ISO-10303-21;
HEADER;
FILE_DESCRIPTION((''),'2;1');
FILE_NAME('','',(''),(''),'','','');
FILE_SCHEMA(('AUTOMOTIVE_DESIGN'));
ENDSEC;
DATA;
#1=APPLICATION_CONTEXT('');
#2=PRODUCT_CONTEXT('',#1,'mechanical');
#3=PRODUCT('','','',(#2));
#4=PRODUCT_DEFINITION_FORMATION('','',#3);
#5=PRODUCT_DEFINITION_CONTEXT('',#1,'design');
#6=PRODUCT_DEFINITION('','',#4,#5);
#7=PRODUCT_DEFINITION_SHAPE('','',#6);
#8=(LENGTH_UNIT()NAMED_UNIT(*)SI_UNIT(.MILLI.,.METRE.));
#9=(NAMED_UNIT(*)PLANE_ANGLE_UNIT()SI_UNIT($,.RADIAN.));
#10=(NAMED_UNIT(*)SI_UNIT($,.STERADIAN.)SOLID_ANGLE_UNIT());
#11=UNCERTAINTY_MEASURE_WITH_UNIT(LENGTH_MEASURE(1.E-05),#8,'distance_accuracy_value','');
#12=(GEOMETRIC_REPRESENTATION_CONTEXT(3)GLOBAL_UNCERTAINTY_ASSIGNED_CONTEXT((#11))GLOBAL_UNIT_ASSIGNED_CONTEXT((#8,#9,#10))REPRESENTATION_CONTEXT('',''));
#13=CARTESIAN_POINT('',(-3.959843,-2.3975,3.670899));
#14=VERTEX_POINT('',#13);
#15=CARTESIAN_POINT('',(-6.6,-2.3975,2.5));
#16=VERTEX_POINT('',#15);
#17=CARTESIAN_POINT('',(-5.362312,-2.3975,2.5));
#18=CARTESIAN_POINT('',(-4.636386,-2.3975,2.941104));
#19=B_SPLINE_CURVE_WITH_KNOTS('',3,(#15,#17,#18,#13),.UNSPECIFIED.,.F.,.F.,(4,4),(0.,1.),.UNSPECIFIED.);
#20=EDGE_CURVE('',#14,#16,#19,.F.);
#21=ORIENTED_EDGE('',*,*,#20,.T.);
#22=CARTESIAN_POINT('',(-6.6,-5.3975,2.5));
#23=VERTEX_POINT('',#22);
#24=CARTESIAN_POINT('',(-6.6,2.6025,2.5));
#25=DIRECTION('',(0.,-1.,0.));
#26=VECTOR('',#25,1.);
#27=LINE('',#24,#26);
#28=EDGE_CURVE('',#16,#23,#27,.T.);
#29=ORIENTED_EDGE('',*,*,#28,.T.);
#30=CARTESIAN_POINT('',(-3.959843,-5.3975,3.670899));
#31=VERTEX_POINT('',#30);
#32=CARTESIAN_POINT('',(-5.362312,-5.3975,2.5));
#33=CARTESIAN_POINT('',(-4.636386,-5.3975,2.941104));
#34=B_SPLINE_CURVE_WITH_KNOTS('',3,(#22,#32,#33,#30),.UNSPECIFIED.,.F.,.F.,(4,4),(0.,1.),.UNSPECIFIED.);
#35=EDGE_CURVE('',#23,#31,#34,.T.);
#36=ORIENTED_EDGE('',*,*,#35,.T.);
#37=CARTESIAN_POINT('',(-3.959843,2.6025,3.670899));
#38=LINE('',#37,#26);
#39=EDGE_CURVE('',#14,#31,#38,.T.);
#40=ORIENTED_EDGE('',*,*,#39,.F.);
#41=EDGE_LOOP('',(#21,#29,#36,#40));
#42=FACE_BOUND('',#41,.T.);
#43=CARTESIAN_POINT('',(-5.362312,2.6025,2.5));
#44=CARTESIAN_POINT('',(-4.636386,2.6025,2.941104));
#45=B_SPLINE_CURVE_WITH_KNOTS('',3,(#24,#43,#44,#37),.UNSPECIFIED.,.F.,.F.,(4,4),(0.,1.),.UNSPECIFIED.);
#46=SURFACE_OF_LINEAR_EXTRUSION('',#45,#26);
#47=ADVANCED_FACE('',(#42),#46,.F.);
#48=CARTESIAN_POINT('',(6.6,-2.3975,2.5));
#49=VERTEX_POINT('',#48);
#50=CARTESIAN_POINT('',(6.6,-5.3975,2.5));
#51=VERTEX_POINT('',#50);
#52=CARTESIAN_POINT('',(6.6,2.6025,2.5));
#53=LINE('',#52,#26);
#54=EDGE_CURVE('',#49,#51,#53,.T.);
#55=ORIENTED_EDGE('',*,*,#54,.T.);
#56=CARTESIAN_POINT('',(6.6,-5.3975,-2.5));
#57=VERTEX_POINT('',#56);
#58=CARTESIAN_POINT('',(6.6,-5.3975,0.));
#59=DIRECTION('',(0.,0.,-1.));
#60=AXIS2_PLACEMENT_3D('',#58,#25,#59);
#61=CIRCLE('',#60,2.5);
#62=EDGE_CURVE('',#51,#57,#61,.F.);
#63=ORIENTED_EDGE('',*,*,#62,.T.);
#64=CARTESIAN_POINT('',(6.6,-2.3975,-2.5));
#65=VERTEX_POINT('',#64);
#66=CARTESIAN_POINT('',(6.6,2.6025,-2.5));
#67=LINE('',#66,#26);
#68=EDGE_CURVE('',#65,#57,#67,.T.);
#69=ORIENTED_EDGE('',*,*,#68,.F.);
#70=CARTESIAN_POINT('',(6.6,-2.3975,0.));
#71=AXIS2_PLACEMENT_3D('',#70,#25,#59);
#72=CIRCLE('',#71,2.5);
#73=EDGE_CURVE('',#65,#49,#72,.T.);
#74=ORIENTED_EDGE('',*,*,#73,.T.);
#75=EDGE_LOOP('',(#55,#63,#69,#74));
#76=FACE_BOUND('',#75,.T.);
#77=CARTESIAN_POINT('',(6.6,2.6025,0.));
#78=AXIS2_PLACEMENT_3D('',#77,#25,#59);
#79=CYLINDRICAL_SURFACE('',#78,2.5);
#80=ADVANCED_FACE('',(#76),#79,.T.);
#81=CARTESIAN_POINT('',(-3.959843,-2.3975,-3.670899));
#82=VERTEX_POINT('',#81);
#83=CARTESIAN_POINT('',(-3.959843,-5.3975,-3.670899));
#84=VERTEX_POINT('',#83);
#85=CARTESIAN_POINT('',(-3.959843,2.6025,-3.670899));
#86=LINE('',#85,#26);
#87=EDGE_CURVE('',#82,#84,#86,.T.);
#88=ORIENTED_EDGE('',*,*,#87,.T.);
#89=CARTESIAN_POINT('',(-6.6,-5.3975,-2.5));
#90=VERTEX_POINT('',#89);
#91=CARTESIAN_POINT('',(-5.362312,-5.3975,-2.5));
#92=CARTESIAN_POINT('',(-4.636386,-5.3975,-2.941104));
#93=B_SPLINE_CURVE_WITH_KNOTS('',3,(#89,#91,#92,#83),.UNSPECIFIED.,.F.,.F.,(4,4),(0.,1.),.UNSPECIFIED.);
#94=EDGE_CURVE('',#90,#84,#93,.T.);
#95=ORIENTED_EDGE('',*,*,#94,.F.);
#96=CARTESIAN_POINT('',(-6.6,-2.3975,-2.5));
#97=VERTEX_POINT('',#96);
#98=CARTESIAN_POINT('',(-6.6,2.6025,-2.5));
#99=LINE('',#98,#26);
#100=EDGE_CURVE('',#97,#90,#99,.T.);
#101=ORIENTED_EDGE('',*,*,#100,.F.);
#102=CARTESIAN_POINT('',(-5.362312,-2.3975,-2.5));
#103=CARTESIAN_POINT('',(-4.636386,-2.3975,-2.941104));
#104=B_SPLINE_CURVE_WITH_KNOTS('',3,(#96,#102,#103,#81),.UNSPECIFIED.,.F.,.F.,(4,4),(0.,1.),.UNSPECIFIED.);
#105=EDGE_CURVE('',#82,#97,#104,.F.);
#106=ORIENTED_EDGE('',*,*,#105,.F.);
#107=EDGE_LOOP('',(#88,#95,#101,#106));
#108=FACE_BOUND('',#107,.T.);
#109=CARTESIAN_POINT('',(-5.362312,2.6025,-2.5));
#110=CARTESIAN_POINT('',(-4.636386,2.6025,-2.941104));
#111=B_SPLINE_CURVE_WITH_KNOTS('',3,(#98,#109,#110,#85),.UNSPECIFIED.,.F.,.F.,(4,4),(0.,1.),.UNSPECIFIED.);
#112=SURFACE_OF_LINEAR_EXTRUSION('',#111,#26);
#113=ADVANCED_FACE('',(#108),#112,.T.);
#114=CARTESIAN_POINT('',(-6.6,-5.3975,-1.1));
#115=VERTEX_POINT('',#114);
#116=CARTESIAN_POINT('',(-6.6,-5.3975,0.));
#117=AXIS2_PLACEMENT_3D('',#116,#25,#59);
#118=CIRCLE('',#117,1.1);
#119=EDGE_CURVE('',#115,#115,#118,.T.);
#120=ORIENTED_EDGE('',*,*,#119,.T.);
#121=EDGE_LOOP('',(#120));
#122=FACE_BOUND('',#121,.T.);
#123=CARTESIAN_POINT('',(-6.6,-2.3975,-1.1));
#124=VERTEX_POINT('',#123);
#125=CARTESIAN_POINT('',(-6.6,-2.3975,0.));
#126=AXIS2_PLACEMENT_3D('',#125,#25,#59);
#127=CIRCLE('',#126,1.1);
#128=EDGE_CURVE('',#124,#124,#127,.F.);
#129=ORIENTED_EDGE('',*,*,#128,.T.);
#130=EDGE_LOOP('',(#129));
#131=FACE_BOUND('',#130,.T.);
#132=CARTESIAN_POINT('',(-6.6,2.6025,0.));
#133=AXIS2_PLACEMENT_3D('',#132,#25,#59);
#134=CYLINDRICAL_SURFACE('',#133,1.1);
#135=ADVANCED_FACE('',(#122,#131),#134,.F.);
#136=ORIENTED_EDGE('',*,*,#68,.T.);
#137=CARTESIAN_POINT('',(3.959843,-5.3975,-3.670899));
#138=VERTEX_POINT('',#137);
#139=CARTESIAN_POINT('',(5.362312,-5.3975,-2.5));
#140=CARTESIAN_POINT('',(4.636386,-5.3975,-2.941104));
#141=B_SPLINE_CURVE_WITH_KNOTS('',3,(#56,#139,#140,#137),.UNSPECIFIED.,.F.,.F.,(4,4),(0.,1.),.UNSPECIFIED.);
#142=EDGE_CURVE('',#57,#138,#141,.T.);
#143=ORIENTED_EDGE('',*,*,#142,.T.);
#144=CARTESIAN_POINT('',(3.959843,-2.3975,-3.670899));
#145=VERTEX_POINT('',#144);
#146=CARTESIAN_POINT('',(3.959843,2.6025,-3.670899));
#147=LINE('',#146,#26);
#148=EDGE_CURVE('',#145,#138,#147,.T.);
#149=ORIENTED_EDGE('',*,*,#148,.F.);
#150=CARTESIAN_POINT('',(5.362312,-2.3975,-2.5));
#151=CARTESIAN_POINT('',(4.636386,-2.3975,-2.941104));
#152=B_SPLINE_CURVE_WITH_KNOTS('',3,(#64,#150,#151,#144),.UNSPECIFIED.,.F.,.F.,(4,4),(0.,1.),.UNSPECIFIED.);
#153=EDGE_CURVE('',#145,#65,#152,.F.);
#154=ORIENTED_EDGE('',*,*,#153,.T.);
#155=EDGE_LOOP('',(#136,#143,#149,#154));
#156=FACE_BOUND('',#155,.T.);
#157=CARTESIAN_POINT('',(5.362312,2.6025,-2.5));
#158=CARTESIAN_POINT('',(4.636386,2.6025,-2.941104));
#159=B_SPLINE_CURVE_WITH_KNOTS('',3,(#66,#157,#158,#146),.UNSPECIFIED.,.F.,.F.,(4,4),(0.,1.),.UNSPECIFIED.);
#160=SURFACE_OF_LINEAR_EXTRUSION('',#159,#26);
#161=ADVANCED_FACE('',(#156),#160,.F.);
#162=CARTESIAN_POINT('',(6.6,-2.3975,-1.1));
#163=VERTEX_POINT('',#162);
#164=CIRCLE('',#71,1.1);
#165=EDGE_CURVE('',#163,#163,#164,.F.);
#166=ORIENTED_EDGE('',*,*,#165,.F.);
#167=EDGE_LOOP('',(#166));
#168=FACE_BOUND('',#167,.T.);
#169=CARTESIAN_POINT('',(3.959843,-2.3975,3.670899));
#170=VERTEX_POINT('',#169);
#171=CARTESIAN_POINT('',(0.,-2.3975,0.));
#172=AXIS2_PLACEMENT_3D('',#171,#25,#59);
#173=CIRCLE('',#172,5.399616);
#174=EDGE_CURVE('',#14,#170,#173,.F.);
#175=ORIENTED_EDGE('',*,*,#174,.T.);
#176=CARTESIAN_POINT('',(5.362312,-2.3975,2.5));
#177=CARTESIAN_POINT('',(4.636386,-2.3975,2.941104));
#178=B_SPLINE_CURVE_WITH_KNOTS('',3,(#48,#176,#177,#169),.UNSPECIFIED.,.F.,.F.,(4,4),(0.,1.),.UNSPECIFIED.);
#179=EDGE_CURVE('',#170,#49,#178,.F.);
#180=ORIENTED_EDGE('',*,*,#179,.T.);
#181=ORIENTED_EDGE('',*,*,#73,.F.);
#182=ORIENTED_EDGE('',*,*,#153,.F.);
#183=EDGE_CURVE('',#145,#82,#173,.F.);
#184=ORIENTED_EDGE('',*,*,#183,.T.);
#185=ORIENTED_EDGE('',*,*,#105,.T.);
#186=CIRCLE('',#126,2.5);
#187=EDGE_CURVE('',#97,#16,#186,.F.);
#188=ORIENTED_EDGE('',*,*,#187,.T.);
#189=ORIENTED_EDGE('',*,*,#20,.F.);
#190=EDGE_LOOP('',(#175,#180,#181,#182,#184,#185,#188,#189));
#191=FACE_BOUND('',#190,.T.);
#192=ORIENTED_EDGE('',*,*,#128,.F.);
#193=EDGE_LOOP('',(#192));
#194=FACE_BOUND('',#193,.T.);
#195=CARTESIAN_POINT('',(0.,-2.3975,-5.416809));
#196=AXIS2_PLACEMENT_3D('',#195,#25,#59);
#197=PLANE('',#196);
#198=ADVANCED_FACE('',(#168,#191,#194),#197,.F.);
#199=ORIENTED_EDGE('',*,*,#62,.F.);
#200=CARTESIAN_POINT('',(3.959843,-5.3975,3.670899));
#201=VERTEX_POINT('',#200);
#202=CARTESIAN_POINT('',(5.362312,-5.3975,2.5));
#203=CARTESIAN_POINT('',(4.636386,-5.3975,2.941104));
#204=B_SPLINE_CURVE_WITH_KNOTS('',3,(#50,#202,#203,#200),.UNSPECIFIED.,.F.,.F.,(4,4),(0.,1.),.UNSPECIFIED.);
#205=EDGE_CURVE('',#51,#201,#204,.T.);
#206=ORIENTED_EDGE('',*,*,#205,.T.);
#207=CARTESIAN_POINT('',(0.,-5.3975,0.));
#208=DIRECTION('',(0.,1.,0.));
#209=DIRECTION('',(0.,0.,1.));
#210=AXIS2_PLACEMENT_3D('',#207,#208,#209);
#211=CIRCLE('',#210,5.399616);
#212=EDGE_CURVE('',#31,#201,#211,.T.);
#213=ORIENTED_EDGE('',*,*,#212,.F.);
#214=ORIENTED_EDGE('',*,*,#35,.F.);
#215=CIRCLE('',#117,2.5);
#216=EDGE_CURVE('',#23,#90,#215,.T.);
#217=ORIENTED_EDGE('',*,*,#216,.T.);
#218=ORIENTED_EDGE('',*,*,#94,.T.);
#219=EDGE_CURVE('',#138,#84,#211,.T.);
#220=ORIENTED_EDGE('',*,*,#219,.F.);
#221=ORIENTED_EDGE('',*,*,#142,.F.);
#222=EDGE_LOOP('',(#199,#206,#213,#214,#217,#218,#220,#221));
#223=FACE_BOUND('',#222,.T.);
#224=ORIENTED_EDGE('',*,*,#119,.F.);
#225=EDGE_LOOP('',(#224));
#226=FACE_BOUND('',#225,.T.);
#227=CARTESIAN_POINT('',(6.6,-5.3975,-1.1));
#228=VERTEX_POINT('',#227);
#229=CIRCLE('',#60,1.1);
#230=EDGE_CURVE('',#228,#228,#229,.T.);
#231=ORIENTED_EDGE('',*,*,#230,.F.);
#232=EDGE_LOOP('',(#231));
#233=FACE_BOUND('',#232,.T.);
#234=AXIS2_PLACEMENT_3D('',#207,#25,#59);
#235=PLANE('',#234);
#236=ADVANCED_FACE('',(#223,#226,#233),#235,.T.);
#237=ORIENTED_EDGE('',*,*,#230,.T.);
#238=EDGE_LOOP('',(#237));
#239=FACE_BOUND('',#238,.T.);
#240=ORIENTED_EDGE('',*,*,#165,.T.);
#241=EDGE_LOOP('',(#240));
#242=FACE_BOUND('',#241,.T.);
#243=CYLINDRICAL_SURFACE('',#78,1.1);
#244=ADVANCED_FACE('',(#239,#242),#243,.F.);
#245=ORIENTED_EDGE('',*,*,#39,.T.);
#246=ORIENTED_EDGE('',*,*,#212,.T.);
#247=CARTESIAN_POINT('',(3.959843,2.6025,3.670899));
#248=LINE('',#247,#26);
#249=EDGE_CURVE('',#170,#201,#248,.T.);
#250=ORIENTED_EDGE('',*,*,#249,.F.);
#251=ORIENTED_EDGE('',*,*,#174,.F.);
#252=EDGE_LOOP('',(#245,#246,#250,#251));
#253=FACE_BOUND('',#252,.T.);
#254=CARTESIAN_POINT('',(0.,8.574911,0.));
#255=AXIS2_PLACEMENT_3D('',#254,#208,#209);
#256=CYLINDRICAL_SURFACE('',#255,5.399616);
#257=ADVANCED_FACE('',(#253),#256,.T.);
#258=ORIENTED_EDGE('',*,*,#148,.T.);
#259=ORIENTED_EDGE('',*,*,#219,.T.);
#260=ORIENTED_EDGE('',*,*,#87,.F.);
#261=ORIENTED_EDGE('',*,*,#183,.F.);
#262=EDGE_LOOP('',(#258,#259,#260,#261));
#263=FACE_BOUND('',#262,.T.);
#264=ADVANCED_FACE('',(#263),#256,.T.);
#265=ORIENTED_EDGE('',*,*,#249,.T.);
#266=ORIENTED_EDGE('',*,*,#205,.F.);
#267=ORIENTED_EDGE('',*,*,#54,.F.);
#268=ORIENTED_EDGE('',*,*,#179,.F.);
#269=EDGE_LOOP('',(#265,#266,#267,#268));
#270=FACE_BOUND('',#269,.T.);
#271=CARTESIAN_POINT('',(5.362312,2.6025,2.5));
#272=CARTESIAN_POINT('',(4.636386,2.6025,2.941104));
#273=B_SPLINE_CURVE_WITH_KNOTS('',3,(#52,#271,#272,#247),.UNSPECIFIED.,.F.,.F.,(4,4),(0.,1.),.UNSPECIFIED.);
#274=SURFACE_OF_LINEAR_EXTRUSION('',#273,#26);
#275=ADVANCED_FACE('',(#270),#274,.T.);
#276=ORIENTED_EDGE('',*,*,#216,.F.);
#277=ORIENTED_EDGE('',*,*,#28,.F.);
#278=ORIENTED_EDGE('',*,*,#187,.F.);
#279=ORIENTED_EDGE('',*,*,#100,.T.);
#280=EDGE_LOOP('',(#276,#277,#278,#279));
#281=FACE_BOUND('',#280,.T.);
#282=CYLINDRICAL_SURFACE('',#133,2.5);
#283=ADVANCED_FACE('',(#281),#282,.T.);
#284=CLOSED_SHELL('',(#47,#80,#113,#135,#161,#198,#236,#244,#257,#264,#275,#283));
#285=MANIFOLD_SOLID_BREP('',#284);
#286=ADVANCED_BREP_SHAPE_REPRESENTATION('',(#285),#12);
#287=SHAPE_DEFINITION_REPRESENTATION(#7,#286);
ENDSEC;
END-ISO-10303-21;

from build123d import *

# Parameters (mm, degrees)
BOSS_EXTRUDE1_START     = -8
BOSS_EXTRUDE1_OUTLINE_R = 1.1
BOSS_EXTRUDE1_DEPTH     = 8
SKETCH4_R               = 5.399616231
BOSS_EXTRUDE2_DEPTH     = 8
CUT_EXTRUDE1_DEPTH      = 12.881979778
CUT_EXTRUDE1_DEPTH_BACK = 12.881979778
SKETCH5_W               = 18.2
SKETCH5_H               = 5


# Read off the part's stored shape, not the designer's step: Boss-Extrude1
with BuildPart() as part:
    # Sketch1 → Revolve3 (revolve)
    with BuildSketch(Plane.XY):
        with BuildLine():
            Line((-5.399616231, -5.3975), (0, -5.3975))
            Line((0, -5.3975), (0, 2.6025))
            Line((0, 2.6025), (-3.988533565, 2.6025))
            ThreePointArc((-3.988533565, 2.6025), (-4.472061932, 1.637702149), (-4.725960888, 0.58881231))
            add(Edge.make_bspline(
                [(-4.725960888, 0.58881231), (-5.528679385, 0.558813228), (-5.399616231, 0.190451496), (-5.399616231, -0.666596714)],
                knots=[0, 0, 0, 0, 1, 1, 1, 1], degree=3))
            Line((-5.399616231, -0.666596714), (-5.399616231, -5.3975))
        make_face()
    revolve(axis=Axis((0, 8.574910523, 0), (0, -1, 0)))



with BuildPart() as body_2:
    # Boss-Extrude1 outline → Boss-Extrude1 (new body)
    # profile 1 of 2: a face of its own
    with BuildSketch(Plane.XZ.offset(5.3975).offset(BOSS_EXTRUDE1_START)):
        with BuildLine():
            add(Edge.make_bspline(
                [(6.6, -2.5), (5.362311666, -2.5), (4.636385799, -2.941104214), (3.959842535, -3.670899419)],
                knots=[0, 0, 0, 0, 1, 1, 1, 1], degree=3))
            ThreePointArc((6.6, -2.5), (9.1, 0), (6.6, 2.5))
            add(Edge.make_bspline(
                [(6.6, 2.5), (5.362311666, 2.5), (4.636385799, 2.941104214), (3.959842535, 3.670899419)],
                knots=[0, 0, 0, 0, 1, 1, 1, 1], degree=3))
            ThreePointArc((3.959842535, 3.670899419), (5.399616231, 0), (3.959842535, -3.670899419))
        make_face()
        with Locations((6.6, 0)):
            Circle(BOSS_EXTRUDE1_OUTLINE_R, mode=Mode.SUBTRACT)
    # profile 2 of 2: a face of its own
    with BuildSketch(Plane.XZ.offset(5.3975).offset(BOSS_EXTRUDE1_START)):
        with BuildLine():
            ThreePointArc((-6.6, 2.5), (-9.1, 0), (-6.6, -2.5))
            add(Edge.make_bspline(
                [(-6.6, -2.5), (-5.362311666, -2.5), (-4.636385799, -2.941104214), (-3.959842535, -3.670899419)],
                knots=[0, 0, 0, 0, 1, 1, 1, 1], degree=3))
            ThreePointArc((-3.959842535, -3.670899419), (-5.399616231, 0), (-3.959842535, 3.670899419))
            add(Edge.make_bspline(
                [(-6.6, 2.5), (-5.362311666, 2.5), (-4.636385799, 2.941104214), (-3.959842535, 3.670899419)],
                knots=[0, 0, 0, 0, 1, 1, 1, 1], degree=3))
        make_face()
        with Locations((-6.6, 0)):
            Circle(BOSS_EXTRUDE1_OUTLINE_R, mode=Mode.SUBTRACT)
    extrude(amount=BOSS_EXTRUDE1_DEPTH)


with BuildPart() as part_1:
    add(part.part)

    add(body_2.part)  # Boss-Extrude2 merges body 2
    # Sketch4 → Boss-Extrude2 (add)
    with BuildSketch(Plane.XZ.offset(5.3975)):
        Circle(SKETCH4_R)
    extrude(amount=-BOSS_EXTRUDE2_DEPTH)

    # Sketch5 → Cut-Extrude1 (cut, two sides: drawn at the far end of the back side and taken through both)
    with BuildSketch(Plane.XY.offset(-CUT_EXTRUDE1_DEPTH_BACK)):
        with Locations((0, 0.1025)):
            Rectangle(SKETCH5_W, SKETCH5_H)
    extrude(amount=CUT_EXTRUDE1_DEPTH + CUT_EXTRUDE1_DEPTH_BACK, mode=Mode.SUBTRACT)


solid = part_1.part
